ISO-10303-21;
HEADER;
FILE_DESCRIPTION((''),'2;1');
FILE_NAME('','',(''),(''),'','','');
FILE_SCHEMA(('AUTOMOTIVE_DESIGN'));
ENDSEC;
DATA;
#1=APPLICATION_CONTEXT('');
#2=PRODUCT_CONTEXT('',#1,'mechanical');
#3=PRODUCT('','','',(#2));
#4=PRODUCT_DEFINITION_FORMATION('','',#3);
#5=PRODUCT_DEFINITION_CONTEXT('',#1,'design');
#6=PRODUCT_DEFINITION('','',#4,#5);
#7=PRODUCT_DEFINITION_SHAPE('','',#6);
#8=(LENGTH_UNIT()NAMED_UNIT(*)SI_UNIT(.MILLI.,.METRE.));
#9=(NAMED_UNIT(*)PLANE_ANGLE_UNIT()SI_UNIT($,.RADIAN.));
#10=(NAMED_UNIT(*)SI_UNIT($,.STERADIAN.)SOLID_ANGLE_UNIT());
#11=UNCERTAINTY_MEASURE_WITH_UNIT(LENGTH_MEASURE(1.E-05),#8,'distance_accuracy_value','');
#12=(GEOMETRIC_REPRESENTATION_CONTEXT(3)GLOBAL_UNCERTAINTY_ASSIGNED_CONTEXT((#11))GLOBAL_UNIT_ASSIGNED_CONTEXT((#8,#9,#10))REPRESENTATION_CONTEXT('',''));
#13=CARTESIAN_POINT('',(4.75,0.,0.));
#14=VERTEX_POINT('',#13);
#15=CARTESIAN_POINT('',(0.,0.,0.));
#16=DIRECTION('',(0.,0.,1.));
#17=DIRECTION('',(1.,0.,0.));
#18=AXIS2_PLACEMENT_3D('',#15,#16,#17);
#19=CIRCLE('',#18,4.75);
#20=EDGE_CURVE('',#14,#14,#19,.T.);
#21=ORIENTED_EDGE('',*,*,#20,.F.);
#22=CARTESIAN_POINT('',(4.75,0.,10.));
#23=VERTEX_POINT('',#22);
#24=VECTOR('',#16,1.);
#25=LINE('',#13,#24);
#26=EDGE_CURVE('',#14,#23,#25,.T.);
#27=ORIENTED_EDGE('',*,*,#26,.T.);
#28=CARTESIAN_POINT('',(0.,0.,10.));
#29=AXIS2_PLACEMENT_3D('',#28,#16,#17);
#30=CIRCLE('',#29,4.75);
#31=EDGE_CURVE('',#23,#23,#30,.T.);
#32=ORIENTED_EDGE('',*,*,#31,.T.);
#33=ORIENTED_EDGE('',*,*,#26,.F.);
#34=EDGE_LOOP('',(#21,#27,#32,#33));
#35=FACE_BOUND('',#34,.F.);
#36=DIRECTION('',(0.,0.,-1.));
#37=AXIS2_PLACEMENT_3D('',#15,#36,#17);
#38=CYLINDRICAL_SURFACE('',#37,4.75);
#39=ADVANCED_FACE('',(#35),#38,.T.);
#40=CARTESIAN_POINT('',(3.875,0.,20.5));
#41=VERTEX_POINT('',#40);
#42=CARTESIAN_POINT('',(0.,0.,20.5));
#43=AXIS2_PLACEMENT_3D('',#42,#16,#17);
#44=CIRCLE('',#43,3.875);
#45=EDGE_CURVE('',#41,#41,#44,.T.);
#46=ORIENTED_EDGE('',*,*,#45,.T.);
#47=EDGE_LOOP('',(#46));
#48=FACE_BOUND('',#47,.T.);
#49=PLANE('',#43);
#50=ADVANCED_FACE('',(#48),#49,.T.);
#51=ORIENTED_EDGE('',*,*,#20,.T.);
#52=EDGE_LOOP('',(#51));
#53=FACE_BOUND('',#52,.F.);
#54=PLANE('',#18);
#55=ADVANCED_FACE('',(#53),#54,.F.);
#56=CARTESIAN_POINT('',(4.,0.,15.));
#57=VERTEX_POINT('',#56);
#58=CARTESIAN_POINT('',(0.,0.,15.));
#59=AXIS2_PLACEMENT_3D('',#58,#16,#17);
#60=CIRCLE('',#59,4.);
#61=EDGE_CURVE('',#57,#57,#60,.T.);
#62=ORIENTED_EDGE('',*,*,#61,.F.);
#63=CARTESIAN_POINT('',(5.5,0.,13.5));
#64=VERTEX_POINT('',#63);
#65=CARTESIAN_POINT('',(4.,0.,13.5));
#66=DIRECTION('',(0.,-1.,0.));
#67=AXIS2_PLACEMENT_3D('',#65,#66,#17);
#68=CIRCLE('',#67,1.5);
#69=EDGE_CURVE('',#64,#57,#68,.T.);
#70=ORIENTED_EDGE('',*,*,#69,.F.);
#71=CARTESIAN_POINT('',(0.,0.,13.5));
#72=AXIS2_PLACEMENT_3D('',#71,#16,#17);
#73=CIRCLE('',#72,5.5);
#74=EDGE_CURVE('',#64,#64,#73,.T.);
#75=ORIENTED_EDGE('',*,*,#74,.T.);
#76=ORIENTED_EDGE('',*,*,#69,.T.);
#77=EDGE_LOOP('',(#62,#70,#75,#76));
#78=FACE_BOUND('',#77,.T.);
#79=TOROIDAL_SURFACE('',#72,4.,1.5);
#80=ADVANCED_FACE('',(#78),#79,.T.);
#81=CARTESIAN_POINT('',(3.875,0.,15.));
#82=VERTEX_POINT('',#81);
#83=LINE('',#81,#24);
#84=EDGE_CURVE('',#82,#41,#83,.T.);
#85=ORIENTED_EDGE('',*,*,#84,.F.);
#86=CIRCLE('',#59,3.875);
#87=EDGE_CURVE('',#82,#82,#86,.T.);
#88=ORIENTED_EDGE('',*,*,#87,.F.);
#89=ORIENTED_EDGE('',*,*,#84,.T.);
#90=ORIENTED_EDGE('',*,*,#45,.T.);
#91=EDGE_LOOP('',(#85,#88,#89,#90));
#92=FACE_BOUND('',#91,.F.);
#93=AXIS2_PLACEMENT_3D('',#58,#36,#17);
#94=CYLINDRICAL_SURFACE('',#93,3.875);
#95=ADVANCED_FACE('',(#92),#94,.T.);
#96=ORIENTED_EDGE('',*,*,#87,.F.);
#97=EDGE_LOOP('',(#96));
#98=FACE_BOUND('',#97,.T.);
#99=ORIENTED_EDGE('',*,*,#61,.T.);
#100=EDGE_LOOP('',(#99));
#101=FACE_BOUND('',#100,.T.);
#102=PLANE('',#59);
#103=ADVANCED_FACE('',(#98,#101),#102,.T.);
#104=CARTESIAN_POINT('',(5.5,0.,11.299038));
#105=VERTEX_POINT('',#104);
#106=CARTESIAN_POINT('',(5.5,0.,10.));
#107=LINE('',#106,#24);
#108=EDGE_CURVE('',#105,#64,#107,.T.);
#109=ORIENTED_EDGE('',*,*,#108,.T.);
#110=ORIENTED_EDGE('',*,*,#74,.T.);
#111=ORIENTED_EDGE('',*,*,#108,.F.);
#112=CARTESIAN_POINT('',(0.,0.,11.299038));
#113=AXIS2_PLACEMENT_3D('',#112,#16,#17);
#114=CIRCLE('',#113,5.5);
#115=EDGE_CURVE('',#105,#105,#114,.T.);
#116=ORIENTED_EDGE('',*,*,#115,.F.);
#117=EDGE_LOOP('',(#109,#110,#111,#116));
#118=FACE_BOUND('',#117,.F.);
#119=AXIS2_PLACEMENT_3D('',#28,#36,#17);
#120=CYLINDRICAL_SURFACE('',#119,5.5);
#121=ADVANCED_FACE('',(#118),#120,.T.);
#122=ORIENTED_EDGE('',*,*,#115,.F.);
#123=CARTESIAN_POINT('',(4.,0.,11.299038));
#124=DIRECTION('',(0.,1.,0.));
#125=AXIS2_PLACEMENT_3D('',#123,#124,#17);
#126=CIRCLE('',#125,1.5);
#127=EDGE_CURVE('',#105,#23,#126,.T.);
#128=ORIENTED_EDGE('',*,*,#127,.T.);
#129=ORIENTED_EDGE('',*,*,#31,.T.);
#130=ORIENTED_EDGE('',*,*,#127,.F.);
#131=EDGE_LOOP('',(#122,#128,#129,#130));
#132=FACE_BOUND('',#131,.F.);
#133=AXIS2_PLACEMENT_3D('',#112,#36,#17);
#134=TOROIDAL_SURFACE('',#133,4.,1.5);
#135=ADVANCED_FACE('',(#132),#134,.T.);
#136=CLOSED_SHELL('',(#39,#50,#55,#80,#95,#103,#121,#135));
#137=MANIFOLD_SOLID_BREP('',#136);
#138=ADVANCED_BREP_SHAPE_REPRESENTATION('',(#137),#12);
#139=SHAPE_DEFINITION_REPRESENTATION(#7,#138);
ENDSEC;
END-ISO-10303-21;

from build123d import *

# Parameters (mm, degrees)
F0_R     = 4.75
F1_DEPTH = 10
F2_R     = 5.5
F3_DEPTH = 5
F4_R     = 3.875
F5_DEPTH = 5.5


# Not quite as in the source:
# - a fillet or chamfer that OpenCascade refuses, or shapes differently, is made with other operations: its cross-section is extruded or revolved along the edge and cut away or added


with BuildPart() as f1:
    # F0 (on Top) → F1 (new body)
    with BuildSketch(Plane.XY):
        Circle(F0_R)
    extrude(amount=F1_DEPTH)

    # F2 (on face) → F3 (join)
    with BuildSketch(Plane.XY.offset(10)):
        Circle(F2_R)
    extrude(amount=F3_DEPTH)

    # F4 (on face) → F5 (join)
    with BuildSketch(Plane.XY.offset(15)):
        Circle(F4_R)
    extrude(amount=F5_DEPTH)

    # F6: fillet of radius 1.5 on 2 edges, made by hand

    # F6_s1 → F6_t2 (revolve, cut)
    with BuildSketch(Plane.XZ):
        with BuildLine():
            ThreePointArc((5.5, 13.5), (5.0606601718, 14.5606601718), (4, 15))
            Line((4, 15), (5.5, 15))
            Line((5.5, 15), (5.5, 13.5))
        make_face()
    revolve(axis=Axis((0, 0, 15), (0, 0, 1)), mode=Mode.SUBTRACT)

    # F6_s3 → F6_t4 (revolve, cut)
    with BuildSketch(Plane.XZ):
        with BuildLine():
            ThreePointArc((5.5, 11.2990381057), (5.2990381057, 10.5490381057), (4.75, 10))
            Line((4.75, 10), (5.5, 10))
            Line((5.5, 10), (5.5, 11.2990381057))
        make_face()
    revolve(axis=Axis((0, 0, 10), (0, 0, 1)), mode=Mode.SUBTRACT)


solid = f1.part
